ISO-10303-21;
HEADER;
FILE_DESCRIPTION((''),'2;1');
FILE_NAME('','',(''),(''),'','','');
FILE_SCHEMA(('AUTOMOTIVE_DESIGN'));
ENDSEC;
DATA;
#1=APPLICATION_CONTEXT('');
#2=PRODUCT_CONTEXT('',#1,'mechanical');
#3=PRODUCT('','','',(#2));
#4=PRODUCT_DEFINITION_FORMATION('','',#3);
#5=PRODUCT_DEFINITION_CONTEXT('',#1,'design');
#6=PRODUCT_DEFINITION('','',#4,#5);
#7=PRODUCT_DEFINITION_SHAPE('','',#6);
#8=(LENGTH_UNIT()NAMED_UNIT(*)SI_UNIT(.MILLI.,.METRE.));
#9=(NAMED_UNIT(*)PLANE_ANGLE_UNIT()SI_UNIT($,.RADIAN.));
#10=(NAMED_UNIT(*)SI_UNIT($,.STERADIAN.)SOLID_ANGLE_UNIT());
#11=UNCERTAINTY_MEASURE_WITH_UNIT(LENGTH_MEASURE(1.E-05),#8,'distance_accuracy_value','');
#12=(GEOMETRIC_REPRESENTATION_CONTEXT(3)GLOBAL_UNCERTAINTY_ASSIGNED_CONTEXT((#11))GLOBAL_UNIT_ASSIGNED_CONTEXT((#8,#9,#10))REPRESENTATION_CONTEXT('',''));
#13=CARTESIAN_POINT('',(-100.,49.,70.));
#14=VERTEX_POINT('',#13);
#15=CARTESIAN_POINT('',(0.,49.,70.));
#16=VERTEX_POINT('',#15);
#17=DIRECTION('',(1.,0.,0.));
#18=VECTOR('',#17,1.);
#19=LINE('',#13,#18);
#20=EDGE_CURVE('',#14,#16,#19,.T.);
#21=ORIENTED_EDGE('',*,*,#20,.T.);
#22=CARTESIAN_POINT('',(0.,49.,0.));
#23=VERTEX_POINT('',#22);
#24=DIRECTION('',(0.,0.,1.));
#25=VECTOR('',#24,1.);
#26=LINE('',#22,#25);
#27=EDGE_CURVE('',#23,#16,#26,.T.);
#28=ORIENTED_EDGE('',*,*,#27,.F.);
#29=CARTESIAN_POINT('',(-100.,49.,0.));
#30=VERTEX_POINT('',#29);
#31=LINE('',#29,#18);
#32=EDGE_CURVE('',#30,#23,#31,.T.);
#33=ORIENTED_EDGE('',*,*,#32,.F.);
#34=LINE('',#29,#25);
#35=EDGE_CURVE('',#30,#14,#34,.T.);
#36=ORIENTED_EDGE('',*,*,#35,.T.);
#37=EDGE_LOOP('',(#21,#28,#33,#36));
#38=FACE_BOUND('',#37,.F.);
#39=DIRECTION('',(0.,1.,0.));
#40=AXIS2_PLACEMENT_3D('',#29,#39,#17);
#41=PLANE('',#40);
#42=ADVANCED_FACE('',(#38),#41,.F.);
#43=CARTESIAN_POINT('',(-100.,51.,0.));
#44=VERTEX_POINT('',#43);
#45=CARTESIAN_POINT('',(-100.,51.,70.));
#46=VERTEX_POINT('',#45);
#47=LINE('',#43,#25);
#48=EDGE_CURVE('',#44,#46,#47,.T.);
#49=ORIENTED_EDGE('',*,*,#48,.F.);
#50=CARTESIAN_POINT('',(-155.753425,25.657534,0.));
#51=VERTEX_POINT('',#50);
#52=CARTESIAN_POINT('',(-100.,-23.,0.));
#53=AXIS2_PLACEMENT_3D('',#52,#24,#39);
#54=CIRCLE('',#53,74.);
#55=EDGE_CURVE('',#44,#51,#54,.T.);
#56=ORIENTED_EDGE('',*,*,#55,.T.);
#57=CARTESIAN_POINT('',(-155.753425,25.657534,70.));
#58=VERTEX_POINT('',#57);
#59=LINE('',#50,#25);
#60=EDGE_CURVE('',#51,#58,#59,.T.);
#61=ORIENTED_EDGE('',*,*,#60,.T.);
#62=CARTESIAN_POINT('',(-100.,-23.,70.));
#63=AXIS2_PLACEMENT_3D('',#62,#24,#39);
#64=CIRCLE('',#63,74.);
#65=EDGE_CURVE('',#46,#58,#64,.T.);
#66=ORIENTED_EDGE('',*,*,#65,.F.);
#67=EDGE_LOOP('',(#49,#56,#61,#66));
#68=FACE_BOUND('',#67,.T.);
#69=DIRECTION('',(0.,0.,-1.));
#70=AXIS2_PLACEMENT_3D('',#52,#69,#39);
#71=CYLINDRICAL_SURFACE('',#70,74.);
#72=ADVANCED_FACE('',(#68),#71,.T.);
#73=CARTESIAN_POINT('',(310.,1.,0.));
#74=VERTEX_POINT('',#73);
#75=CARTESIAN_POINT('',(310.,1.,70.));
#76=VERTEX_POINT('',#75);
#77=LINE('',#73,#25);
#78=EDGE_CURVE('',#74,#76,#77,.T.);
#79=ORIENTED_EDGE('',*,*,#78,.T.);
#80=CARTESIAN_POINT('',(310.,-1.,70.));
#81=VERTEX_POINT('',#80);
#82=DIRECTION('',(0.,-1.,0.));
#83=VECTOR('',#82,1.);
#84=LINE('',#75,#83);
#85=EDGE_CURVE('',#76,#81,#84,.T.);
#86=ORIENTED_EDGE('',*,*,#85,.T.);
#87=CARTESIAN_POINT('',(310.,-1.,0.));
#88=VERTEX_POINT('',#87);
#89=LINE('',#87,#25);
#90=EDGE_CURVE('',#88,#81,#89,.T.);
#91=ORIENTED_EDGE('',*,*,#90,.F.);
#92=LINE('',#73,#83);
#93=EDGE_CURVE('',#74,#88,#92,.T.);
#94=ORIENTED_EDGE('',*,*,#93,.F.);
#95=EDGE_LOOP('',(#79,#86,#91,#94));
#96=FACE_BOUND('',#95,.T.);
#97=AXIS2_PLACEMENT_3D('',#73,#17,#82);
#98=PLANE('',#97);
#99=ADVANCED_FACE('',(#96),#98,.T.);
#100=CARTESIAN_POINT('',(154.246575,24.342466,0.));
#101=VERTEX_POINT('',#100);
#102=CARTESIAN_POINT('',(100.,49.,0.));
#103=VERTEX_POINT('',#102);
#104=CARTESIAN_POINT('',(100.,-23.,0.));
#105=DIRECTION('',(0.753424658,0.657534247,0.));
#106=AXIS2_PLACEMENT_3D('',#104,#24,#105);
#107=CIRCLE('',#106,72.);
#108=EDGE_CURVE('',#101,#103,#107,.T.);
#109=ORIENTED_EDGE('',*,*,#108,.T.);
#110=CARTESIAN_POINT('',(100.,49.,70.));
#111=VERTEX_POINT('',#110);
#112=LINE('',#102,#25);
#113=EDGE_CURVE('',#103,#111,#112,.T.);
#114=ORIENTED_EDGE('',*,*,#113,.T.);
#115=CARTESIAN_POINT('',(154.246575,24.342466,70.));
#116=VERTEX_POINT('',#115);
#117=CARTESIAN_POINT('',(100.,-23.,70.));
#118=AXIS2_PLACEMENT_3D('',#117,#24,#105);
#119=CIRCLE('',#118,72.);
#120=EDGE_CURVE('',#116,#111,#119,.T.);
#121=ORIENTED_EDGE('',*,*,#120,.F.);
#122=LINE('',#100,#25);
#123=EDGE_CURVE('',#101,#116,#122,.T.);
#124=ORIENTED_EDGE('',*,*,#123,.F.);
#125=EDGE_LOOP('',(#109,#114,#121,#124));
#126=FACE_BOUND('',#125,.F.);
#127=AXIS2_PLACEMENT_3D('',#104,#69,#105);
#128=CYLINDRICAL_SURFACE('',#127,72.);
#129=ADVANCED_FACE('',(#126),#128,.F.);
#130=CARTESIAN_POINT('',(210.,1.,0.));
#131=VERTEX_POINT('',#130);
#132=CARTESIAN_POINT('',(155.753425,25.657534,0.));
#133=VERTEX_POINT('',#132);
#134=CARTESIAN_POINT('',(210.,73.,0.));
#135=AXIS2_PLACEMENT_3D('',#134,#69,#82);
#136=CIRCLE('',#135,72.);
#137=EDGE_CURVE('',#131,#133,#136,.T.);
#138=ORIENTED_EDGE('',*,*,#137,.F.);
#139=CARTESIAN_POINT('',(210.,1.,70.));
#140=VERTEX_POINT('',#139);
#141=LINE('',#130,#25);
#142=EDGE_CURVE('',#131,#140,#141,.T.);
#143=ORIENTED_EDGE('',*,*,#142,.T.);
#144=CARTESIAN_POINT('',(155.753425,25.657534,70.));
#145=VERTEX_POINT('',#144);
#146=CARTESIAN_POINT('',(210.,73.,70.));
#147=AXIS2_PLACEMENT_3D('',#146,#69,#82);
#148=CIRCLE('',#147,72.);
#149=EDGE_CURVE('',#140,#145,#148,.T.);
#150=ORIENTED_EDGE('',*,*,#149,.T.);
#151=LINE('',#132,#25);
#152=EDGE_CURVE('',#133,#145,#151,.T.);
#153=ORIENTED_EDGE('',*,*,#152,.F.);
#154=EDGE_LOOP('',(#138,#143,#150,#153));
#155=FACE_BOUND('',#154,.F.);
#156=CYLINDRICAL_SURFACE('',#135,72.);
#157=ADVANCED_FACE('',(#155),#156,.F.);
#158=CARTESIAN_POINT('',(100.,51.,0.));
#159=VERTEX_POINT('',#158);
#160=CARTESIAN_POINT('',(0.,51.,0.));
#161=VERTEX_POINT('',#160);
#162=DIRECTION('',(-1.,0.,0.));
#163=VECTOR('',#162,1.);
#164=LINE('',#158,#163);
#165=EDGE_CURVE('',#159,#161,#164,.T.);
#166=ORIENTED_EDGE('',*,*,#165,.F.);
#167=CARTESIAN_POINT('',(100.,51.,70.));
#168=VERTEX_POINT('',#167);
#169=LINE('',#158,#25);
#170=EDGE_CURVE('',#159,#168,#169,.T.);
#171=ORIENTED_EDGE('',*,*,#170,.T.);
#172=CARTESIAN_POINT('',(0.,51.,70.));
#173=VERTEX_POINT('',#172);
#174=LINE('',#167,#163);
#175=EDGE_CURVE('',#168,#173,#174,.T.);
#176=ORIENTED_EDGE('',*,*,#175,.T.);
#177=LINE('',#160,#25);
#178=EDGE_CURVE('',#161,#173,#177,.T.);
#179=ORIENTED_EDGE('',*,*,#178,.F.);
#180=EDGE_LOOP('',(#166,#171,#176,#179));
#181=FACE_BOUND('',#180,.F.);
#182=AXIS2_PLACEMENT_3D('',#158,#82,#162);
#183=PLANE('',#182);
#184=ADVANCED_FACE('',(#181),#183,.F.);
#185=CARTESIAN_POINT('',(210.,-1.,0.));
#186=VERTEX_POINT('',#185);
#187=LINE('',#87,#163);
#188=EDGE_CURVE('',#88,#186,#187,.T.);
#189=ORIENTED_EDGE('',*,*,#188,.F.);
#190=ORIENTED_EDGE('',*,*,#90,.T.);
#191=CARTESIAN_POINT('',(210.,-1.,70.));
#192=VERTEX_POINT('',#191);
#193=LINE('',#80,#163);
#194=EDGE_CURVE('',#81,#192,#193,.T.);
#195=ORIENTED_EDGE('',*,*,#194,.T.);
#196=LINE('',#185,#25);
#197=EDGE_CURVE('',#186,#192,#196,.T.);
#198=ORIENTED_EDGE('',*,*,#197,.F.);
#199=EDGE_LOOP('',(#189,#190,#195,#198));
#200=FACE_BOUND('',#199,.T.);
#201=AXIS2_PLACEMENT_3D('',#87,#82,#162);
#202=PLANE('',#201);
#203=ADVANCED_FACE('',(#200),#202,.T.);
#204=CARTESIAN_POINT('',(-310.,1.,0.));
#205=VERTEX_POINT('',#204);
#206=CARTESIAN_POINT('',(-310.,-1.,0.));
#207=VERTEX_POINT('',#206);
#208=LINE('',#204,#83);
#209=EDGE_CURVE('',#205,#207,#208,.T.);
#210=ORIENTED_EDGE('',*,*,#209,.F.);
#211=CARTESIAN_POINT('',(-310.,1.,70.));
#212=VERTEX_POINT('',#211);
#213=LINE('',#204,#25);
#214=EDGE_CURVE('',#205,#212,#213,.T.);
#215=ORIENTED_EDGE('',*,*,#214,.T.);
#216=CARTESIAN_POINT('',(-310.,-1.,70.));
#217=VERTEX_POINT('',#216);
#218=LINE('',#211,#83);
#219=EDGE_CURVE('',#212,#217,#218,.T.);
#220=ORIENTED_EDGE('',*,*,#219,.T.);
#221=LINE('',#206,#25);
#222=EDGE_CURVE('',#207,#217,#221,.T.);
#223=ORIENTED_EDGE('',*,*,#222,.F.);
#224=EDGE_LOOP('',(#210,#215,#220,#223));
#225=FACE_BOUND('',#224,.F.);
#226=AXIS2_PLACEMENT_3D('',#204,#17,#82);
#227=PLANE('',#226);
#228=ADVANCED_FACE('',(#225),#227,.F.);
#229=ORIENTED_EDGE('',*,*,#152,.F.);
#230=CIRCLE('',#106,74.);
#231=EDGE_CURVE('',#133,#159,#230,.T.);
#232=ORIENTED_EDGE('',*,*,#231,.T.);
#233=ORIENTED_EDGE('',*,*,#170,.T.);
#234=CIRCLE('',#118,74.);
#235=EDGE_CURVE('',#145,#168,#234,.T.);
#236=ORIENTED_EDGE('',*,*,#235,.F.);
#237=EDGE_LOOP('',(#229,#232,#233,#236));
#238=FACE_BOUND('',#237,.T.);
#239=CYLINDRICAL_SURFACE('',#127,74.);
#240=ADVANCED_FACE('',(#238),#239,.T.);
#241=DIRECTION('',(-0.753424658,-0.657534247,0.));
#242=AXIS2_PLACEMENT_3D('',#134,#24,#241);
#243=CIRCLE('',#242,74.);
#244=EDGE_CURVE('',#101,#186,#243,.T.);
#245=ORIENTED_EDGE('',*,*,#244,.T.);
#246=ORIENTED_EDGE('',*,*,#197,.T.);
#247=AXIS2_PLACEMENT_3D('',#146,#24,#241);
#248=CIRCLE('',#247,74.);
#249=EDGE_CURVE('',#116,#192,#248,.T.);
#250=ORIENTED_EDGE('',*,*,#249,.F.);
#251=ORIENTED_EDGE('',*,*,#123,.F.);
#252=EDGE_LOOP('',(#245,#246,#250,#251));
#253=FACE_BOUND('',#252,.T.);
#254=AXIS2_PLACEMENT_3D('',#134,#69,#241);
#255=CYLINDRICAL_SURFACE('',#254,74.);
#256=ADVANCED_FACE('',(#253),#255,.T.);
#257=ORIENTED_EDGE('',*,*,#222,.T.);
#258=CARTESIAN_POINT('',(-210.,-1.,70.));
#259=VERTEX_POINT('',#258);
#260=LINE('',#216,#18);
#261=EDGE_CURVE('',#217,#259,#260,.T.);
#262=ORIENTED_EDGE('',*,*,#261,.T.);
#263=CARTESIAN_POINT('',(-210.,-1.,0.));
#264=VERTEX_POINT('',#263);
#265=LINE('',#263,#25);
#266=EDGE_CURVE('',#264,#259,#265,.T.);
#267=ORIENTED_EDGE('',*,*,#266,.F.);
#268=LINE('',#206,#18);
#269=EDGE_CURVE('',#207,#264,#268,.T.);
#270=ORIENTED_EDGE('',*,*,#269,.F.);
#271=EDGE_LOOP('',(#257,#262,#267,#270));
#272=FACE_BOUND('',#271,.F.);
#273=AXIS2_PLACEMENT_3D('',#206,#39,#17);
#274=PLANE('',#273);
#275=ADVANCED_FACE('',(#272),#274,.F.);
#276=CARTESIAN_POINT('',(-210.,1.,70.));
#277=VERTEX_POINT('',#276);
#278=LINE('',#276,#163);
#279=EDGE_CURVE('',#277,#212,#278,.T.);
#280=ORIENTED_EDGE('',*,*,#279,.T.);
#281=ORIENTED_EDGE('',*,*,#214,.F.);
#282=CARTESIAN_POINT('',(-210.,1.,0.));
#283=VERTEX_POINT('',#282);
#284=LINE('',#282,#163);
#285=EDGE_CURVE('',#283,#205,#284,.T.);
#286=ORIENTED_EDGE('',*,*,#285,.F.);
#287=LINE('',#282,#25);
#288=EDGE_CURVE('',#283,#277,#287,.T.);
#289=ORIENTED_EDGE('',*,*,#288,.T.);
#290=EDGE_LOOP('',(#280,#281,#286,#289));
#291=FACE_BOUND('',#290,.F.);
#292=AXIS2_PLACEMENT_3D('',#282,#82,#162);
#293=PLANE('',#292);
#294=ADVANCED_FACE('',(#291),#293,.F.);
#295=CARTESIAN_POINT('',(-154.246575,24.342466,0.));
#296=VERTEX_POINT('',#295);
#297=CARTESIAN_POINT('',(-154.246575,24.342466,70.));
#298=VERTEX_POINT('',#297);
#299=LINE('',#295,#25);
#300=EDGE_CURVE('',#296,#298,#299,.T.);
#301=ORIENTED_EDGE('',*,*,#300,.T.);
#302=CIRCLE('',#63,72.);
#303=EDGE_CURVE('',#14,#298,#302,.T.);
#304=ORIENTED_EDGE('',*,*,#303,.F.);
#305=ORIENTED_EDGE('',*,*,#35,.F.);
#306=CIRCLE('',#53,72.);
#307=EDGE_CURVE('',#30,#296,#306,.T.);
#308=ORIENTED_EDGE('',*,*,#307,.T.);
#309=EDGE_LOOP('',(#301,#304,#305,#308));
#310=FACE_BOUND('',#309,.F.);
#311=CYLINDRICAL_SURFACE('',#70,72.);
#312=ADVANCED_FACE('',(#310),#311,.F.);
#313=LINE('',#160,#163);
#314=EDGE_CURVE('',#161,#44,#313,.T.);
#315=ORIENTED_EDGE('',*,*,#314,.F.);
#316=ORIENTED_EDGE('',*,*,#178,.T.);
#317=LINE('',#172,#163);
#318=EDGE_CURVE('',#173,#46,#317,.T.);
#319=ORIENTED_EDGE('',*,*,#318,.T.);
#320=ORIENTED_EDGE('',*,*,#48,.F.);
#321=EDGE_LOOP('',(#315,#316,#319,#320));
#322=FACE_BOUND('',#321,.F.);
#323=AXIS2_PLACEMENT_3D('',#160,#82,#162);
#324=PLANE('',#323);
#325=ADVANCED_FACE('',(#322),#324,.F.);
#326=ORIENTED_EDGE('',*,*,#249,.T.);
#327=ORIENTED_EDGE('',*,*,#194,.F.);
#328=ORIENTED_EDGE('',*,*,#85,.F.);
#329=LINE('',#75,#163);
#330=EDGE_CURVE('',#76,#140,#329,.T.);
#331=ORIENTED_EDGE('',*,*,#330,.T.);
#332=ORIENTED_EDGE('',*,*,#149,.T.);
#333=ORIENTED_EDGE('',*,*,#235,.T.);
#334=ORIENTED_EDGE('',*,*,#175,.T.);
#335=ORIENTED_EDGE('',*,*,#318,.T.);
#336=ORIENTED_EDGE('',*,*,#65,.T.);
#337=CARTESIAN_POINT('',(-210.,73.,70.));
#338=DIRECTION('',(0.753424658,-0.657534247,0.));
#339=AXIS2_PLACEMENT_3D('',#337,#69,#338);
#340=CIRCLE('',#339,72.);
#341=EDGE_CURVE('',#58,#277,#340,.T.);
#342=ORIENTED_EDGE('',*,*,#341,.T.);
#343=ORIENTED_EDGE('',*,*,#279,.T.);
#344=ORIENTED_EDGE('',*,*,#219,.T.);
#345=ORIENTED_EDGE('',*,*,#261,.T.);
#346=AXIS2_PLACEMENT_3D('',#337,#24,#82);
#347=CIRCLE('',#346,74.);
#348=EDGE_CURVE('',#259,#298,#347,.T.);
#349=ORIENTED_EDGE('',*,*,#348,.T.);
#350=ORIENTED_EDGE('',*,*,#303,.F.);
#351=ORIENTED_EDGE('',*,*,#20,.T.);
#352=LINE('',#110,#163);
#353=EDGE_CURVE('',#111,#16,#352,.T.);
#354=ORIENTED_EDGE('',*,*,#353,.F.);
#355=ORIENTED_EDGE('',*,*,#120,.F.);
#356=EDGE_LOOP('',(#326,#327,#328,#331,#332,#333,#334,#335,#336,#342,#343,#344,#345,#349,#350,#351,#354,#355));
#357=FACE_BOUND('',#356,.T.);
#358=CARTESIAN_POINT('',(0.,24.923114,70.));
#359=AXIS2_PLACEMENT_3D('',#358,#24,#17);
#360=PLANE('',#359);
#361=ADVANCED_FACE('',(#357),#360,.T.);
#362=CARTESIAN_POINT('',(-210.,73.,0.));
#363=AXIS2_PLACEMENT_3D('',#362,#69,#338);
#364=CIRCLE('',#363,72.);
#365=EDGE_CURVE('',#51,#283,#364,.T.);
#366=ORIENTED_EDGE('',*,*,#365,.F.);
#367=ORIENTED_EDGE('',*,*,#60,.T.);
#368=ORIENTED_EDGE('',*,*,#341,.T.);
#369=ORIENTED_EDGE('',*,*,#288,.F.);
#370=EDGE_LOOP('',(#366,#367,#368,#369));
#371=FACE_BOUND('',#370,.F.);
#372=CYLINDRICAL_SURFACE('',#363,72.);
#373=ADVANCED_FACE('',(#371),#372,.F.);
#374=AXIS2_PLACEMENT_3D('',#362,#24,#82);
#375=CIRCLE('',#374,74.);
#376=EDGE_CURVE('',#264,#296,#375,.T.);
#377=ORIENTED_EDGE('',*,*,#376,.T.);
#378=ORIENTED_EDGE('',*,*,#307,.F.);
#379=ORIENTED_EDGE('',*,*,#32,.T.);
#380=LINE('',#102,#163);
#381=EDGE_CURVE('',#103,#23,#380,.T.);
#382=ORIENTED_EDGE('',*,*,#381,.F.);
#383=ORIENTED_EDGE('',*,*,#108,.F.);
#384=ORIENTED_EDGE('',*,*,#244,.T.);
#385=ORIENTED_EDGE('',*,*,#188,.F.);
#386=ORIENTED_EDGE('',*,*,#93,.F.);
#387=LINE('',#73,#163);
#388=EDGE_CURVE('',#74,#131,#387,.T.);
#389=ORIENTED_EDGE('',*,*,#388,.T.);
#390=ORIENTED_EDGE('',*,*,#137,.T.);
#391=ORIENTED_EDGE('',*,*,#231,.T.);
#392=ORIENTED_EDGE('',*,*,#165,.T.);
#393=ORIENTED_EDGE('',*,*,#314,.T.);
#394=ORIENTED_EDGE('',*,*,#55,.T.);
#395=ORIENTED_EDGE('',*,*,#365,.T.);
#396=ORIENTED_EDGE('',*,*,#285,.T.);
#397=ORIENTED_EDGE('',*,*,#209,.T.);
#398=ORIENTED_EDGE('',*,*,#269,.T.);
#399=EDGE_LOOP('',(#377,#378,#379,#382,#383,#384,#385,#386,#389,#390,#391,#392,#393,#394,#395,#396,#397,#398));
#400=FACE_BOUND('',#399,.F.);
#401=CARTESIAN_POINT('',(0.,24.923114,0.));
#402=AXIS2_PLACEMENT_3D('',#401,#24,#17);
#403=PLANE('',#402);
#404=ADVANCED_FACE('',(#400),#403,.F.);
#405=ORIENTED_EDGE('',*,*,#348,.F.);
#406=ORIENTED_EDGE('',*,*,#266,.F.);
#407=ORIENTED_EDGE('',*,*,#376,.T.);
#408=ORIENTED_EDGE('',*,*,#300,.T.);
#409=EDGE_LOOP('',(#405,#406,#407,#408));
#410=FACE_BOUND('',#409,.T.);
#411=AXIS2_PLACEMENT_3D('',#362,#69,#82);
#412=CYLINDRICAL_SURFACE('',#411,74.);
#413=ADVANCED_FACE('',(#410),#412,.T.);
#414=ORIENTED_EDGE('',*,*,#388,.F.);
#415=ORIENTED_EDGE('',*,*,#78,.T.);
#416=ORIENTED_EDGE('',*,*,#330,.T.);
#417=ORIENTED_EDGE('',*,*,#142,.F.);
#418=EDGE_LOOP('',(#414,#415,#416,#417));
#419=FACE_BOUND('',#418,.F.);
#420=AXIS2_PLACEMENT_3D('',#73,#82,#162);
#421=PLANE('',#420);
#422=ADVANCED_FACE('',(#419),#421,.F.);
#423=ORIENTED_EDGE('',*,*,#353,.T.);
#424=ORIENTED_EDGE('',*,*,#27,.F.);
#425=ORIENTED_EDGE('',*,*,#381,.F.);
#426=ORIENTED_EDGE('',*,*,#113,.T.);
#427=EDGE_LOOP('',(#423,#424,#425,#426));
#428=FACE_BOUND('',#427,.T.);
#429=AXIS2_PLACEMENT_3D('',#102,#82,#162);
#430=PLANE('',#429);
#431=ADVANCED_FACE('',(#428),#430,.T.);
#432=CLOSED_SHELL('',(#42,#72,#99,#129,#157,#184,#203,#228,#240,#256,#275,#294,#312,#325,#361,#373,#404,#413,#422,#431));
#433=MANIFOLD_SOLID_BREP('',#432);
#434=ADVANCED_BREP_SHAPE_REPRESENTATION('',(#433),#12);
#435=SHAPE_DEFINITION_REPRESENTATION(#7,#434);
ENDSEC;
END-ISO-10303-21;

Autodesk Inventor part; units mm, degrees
ref_plane "YZ Plane" through (0, 0, 0) normal (1, 0, 0) x (0, 1, 0)
ref_plane "XZ Plane" through (0, 0, 0) normal (0, 1, 0) x (-1, 0, 0)
ref_plane "XY Plane" through (0, 0, 0) normal (0, 0, 1) x (1, 0, 0)
sketch "Эскиз4" plane through (0, 0, 0) normal (0, 0, 1) x (1, 0, 0)
  line L0 (-310, 0) -> (-210, 0)
  arc A0 (-210, 0) -> (-155, 25) centre (-210, 73) ccw
  arc A1 (-100, 50) -> (-155, 25) centre (-100, -23) ccw
  line L1 (-100, 50) -> (0, 50)
  line L2 (0, -42.2) -> (0, 92.2)
  line L3 (310, 0) -> (210, 0)
  arc A2 (155, 25) -> (210, 0) centre (210, 73) ccw
  arc A3 (155, 25) -> (100, 50) centre (100, -23) ccw
  line L4 (100, 50) -> (0, 50)
  point P0 (0, 0)
  dimension "d39" = 50
  dimension "d61" = 100
  dimension "d63" = 200
  dimension "d64" = 620
contour flange "Фланец по контуру2" sketch "Эскиз4" thickness 2 bend radius 2 width 70 along (0, 0, 1) mid plane no both sides yes wall seen from (260, 0, 0) lies toward (0, -1, 0) curves L3 A2 A3 L4 L1 A1 A0 L0
bend "Сгиб3"
corner "УглСтык3"
equation "\"d26\" = Толщина"
equation "\"d27\" = Ширина_просечки"
equation "\"d28\" = Глубина_просечки"
equation "\"d29\" = Мин_остаток"
equation "\"d30\" = Радиус_перехода"
equation "\"d32\" = Радиус_гибки"
equation "\"d34\" = Размер_просечки"
equation "\"d35\" = Размер_зазора"
equation "\"d36\" = Радиус_Якоби"
equation "\"Радиус_гибки\" = Толщина"
equation "\"Ширина_просечки\" = Толщина"
equation "\"Глубина_просечки\" = 0.5 * Толщина"
equation "\"Размер_просечки\" = 4 * Толщина"
equation "\"Мин_остаток\" = 2 * Толщина"
equation "\"Радиус_перехода\" = Радиус_гибки"
equation "\"Радиус_Якоби\" = Радиус_гибки"
equation "\"Размер_зазора\" = Толщина"
equation "\"Толщина\" = 2"
properties part number "Кожух" material "Алюминий 6061"
